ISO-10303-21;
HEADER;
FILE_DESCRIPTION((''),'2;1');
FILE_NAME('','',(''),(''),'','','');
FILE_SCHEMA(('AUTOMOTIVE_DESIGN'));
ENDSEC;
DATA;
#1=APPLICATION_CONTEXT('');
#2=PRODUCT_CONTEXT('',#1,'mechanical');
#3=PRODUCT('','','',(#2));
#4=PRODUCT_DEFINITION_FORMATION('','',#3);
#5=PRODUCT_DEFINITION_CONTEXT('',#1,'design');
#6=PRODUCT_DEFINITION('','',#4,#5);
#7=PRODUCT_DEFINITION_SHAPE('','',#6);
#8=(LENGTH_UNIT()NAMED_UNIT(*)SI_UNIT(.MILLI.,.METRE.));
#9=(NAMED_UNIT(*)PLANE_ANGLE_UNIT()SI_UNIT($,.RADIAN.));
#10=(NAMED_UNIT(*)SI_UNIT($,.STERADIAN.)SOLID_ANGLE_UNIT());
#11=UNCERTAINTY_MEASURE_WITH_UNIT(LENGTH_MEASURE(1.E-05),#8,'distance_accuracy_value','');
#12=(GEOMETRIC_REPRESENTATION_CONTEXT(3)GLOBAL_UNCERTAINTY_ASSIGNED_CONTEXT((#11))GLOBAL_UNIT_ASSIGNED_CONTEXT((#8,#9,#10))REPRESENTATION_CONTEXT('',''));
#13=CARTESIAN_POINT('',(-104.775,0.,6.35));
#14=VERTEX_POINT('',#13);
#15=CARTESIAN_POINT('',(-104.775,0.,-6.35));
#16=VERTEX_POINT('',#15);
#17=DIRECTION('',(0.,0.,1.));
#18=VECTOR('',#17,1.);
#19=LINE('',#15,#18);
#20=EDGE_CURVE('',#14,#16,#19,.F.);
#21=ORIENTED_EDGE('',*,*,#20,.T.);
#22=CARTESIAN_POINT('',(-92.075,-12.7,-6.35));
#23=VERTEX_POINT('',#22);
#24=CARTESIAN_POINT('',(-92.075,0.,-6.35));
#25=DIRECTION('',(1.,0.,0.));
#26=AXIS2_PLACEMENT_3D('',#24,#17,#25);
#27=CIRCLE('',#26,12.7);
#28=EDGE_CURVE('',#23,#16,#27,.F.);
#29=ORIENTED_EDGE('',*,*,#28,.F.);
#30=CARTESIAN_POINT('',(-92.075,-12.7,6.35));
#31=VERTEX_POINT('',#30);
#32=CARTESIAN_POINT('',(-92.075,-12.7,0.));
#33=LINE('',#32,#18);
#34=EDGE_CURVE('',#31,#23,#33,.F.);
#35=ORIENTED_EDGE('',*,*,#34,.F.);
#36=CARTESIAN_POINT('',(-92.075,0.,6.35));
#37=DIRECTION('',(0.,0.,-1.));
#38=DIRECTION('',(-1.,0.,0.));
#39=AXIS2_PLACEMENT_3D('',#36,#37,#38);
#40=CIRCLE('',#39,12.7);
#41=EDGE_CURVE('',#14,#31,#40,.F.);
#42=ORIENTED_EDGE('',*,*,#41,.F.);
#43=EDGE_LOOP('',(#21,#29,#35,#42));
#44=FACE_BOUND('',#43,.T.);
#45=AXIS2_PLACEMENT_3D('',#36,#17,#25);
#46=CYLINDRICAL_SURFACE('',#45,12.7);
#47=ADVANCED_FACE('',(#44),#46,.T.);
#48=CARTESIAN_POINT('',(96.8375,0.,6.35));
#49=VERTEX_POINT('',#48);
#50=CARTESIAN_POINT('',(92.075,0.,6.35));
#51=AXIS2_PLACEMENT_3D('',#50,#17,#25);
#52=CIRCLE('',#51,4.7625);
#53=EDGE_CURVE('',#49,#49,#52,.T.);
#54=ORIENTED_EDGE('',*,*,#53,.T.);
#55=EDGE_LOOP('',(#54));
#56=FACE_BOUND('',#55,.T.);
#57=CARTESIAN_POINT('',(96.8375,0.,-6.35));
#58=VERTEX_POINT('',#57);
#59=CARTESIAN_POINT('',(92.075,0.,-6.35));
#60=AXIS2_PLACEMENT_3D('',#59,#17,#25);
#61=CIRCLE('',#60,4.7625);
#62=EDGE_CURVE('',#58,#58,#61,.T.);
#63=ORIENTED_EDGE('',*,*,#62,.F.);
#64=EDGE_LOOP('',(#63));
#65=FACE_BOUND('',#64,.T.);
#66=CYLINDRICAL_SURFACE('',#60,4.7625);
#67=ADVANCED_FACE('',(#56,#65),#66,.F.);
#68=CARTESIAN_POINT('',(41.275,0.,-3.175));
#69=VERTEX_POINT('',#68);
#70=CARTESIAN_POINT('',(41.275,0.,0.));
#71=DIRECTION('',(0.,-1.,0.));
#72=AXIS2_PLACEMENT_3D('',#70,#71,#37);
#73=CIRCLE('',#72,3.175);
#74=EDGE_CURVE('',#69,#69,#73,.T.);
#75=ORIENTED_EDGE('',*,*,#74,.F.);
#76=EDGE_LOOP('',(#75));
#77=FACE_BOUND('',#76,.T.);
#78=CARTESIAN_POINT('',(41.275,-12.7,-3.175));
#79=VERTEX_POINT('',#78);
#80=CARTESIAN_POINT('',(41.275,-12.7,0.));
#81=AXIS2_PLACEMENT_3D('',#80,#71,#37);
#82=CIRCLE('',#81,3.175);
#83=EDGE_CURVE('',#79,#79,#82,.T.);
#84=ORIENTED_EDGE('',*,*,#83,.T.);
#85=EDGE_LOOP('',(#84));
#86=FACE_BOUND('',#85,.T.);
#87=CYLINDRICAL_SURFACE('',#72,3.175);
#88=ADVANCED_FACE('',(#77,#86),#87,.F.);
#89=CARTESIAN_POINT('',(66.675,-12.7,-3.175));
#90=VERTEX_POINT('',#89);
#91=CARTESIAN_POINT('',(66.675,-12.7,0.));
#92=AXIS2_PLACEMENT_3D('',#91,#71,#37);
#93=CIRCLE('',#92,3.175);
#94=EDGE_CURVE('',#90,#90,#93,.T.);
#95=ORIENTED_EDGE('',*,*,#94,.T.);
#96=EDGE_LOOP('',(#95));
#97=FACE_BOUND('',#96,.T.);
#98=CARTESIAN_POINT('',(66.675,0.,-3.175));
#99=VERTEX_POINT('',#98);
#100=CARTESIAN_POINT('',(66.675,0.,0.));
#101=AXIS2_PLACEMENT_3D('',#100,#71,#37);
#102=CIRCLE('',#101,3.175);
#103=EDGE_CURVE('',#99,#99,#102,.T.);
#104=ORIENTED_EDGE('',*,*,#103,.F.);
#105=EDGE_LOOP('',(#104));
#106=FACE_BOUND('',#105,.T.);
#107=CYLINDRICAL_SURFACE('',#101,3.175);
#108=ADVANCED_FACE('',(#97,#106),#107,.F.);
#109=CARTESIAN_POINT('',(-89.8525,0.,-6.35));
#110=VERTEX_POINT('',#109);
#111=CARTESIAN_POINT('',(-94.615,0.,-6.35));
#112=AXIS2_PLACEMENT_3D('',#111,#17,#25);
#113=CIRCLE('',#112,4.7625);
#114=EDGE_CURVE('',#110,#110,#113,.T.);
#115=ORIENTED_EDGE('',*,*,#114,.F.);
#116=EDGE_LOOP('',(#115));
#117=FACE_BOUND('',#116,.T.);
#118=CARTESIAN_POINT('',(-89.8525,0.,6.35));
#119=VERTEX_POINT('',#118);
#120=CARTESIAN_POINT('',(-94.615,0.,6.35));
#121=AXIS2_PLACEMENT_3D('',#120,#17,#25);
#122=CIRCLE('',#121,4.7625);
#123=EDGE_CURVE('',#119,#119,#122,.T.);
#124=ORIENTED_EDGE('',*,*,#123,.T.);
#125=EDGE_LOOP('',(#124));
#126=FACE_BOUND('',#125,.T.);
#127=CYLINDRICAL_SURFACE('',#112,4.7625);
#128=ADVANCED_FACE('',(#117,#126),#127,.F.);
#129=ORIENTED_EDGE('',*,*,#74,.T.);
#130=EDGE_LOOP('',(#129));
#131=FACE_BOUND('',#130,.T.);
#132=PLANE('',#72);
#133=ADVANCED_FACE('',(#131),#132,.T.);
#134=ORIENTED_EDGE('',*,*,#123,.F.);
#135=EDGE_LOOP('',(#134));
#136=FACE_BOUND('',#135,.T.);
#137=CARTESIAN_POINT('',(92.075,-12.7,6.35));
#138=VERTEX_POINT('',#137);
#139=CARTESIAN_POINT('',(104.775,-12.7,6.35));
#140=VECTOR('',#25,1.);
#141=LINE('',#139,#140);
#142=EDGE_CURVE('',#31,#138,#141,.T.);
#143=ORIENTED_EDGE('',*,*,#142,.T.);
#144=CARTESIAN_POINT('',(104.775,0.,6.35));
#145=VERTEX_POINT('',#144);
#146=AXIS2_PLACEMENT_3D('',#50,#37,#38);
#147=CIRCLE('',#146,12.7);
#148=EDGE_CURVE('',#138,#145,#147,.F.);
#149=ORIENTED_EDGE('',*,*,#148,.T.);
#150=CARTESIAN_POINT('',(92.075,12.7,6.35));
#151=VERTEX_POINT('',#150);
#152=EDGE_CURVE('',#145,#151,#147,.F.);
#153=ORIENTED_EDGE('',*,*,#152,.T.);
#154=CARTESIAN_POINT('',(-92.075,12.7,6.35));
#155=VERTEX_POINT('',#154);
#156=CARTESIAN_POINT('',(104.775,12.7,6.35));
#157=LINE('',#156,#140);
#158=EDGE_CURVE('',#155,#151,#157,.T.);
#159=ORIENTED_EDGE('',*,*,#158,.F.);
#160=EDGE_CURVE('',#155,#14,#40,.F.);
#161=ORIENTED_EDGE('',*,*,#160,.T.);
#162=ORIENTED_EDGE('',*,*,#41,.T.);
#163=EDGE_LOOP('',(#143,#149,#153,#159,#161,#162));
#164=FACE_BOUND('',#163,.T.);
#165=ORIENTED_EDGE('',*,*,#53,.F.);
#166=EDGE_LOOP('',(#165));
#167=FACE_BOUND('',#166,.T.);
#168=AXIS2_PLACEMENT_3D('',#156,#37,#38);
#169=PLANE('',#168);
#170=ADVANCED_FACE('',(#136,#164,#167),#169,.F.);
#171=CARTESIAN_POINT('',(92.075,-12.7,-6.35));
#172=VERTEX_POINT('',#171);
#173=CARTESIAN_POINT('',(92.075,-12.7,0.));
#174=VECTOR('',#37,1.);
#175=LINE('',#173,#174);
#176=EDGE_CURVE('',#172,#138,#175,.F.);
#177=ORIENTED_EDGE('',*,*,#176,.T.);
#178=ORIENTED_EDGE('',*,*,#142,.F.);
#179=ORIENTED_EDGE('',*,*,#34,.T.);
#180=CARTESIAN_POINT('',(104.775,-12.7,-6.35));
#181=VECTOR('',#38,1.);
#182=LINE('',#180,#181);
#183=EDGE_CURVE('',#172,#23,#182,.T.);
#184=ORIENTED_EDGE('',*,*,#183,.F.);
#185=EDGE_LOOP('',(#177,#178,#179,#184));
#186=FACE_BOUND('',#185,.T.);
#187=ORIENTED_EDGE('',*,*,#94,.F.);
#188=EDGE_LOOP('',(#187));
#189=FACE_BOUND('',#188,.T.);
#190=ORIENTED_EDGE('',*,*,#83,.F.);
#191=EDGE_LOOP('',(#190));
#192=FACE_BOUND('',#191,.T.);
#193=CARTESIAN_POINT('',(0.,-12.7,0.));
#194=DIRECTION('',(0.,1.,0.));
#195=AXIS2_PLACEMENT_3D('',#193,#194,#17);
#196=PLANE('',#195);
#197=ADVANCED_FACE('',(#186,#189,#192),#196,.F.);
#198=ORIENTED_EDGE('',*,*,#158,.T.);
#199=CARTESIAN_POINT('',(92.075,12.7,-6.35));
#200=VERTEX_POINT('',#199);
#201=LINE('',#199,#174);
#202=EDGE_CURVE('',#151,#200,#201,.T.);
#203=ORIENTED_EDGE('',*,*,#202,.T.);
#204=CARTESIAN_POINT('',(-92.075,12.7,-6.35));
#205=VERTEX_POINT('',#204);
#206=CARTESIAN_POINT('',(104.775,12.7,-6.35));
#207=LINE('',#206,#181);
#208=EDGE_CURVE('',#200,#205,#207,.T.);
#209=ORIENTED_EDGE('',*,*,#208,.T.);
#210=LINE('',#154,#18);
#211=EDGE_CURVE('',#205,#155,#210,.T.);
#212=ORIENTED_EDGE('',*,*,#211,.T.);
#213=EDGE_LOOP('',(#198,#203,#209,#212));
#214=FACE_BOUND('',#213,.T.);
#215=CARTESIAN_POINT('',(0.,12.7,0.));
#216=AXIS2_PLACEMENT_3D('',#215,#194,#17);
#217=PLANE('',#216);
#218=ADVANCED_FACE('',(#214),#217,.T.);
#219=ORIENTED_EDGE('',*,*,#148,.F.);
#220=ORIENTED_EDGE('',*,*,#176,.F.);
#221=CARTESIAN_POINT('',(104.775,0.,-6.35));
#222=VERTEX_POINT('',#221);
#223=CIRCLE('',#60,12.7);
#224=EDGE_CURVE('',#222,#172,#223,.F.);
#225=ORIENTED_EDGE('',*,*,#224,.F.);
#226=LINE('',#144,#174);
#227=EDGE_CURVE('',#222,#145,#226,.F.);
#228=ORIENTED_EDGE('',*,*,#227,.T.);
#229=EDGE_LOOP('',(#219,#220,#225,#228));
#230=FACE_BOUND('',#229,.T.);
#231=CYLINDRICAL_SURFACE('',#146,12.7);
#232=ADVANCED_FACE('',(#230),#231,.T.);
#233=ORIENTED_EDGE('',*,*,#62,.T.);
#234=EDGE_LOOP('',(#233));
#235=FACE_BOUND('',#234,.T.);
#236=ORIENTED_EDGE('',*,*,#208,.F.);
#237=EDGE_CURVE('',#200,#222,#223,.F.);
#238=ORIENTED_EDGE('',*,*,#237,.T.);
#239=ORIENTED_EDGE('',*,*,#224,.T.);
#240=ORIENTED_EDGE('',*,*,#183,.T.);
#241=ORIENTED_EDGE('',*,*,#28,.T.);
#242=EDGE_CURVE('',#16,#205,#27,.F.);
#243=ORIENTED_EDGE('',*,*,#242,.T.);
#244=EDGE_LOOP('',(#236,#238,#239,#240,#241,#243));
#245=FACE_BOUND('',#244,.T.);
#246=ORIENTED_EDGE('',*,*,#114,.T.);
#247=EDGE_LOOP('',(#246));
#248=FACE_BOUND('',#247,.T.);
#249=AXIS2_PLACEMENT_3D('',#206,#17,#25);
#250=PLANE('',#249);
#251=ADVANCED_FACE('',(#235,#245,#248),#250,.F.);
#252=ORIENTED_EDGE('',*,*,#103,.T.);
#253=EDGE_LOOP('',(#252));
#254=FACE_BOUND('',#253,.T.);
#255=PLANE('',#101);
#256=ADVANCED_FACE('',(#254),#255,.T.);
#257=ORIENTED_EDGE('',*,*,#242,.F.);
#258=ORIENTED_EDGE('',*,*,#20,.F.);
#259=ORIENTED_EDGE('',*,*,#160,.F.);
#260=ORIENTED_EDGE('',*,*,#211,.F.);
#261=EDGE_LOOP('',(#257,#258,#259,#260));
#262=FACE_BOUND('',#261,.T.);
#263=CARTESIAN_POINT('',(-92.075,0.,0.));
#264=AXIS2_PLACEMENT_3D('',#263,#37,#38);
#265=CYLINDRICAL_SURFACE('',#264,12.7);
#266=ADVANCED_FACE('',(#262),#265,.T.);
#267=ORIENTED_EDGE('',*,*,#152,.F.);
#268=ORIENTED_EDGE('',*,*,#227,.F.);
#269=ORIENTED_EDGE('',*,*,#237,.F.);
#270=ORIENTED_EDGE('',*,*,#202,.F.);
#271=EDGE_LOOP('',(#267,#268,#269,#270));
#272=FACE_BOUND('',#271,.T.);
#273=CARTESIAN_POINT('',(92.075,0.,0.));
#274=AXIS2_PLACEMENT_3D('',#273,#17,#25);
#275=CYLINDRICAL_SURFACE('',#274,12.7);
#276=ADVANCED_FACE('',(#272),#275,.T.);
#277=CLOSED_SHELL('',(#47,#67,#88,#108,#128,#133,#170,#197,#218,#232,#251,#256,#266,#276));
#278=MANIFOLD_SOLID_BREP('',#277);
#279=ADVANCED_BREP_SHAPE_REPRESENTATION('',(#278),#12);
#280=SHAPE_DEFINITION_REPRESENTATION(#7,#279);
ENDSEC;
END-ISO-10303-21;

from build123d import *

# Parameters (mm, degrees)
SKETCH1_W           = 209.55
SKETCH1_H           = 12.7
BOSS_EXTRUDE1_DEPTH = 12.7
SKETCH2_R           = 4.7625
CUT_EXTRUDE1_DEPTH  = 107.303248422
FILLET1_R           = 12.7
SKETCH4_R           = 3.175
CUT_EXTRUDE3_DEPTH  = 12.7


with BuildPart() as part:
    # Sketch1 → Boss-Extrude1 (new, symmetric)
    with BuildSketch(Plane(origin=(0, 0, 0), x_dir=(1, 0, 0), z_dir=(0, 1, 0))):
        Rectangle(SKETCH1_W, SKETCH1_H)
    extrude(amount=BOSS_EXTRUDE1_DEPTH, both=True)

    # Sketch2 → Cut-Extrude1 (cut, through all)
    with BuildSketch(Plane.XY.offset(6.35)):
        with Locations((-94.615, 0)):
            Circle(SKETCH2_R)
        with Locations((92.075, 0)):
            Circle(SKETCH2_R)
    extrude(amount=-CUT_EXTRUDE1_DEPTH, mode=Mode.SUBTRACT)

    # Fillet1
    fillet1_edges = [part.edges().sort_by_distance(p)[0] for p in [
        (104.775, -12.7, 0),
        (104.775, 12.7, 0),
        (-104.775, -12.7, 0),
        (-104.775, 12.7, 0),
    ]]
    fillet(fillet1_edges, radius=FILLET1_R - 0.0001)  # a hair under: the kernel refuses the full size

    # Sketch4 → Cut-Extrude3 (cut)
    with BuildSketch(Plane.XZ.offset(12.7)):
        with Locations(Location((41.275, 0, 0), (0, 0, 270))):
            Circle(SKETCH4_R)
        with Locations(Location((66.675, 0, 0), (0, 0, 270))):
            Circle(SKETCH4_R)
    extrude(amount=-CUT_EXTRUDE3_DEPTH, mode=Mode.SUBTRACT)


solid = part.part
